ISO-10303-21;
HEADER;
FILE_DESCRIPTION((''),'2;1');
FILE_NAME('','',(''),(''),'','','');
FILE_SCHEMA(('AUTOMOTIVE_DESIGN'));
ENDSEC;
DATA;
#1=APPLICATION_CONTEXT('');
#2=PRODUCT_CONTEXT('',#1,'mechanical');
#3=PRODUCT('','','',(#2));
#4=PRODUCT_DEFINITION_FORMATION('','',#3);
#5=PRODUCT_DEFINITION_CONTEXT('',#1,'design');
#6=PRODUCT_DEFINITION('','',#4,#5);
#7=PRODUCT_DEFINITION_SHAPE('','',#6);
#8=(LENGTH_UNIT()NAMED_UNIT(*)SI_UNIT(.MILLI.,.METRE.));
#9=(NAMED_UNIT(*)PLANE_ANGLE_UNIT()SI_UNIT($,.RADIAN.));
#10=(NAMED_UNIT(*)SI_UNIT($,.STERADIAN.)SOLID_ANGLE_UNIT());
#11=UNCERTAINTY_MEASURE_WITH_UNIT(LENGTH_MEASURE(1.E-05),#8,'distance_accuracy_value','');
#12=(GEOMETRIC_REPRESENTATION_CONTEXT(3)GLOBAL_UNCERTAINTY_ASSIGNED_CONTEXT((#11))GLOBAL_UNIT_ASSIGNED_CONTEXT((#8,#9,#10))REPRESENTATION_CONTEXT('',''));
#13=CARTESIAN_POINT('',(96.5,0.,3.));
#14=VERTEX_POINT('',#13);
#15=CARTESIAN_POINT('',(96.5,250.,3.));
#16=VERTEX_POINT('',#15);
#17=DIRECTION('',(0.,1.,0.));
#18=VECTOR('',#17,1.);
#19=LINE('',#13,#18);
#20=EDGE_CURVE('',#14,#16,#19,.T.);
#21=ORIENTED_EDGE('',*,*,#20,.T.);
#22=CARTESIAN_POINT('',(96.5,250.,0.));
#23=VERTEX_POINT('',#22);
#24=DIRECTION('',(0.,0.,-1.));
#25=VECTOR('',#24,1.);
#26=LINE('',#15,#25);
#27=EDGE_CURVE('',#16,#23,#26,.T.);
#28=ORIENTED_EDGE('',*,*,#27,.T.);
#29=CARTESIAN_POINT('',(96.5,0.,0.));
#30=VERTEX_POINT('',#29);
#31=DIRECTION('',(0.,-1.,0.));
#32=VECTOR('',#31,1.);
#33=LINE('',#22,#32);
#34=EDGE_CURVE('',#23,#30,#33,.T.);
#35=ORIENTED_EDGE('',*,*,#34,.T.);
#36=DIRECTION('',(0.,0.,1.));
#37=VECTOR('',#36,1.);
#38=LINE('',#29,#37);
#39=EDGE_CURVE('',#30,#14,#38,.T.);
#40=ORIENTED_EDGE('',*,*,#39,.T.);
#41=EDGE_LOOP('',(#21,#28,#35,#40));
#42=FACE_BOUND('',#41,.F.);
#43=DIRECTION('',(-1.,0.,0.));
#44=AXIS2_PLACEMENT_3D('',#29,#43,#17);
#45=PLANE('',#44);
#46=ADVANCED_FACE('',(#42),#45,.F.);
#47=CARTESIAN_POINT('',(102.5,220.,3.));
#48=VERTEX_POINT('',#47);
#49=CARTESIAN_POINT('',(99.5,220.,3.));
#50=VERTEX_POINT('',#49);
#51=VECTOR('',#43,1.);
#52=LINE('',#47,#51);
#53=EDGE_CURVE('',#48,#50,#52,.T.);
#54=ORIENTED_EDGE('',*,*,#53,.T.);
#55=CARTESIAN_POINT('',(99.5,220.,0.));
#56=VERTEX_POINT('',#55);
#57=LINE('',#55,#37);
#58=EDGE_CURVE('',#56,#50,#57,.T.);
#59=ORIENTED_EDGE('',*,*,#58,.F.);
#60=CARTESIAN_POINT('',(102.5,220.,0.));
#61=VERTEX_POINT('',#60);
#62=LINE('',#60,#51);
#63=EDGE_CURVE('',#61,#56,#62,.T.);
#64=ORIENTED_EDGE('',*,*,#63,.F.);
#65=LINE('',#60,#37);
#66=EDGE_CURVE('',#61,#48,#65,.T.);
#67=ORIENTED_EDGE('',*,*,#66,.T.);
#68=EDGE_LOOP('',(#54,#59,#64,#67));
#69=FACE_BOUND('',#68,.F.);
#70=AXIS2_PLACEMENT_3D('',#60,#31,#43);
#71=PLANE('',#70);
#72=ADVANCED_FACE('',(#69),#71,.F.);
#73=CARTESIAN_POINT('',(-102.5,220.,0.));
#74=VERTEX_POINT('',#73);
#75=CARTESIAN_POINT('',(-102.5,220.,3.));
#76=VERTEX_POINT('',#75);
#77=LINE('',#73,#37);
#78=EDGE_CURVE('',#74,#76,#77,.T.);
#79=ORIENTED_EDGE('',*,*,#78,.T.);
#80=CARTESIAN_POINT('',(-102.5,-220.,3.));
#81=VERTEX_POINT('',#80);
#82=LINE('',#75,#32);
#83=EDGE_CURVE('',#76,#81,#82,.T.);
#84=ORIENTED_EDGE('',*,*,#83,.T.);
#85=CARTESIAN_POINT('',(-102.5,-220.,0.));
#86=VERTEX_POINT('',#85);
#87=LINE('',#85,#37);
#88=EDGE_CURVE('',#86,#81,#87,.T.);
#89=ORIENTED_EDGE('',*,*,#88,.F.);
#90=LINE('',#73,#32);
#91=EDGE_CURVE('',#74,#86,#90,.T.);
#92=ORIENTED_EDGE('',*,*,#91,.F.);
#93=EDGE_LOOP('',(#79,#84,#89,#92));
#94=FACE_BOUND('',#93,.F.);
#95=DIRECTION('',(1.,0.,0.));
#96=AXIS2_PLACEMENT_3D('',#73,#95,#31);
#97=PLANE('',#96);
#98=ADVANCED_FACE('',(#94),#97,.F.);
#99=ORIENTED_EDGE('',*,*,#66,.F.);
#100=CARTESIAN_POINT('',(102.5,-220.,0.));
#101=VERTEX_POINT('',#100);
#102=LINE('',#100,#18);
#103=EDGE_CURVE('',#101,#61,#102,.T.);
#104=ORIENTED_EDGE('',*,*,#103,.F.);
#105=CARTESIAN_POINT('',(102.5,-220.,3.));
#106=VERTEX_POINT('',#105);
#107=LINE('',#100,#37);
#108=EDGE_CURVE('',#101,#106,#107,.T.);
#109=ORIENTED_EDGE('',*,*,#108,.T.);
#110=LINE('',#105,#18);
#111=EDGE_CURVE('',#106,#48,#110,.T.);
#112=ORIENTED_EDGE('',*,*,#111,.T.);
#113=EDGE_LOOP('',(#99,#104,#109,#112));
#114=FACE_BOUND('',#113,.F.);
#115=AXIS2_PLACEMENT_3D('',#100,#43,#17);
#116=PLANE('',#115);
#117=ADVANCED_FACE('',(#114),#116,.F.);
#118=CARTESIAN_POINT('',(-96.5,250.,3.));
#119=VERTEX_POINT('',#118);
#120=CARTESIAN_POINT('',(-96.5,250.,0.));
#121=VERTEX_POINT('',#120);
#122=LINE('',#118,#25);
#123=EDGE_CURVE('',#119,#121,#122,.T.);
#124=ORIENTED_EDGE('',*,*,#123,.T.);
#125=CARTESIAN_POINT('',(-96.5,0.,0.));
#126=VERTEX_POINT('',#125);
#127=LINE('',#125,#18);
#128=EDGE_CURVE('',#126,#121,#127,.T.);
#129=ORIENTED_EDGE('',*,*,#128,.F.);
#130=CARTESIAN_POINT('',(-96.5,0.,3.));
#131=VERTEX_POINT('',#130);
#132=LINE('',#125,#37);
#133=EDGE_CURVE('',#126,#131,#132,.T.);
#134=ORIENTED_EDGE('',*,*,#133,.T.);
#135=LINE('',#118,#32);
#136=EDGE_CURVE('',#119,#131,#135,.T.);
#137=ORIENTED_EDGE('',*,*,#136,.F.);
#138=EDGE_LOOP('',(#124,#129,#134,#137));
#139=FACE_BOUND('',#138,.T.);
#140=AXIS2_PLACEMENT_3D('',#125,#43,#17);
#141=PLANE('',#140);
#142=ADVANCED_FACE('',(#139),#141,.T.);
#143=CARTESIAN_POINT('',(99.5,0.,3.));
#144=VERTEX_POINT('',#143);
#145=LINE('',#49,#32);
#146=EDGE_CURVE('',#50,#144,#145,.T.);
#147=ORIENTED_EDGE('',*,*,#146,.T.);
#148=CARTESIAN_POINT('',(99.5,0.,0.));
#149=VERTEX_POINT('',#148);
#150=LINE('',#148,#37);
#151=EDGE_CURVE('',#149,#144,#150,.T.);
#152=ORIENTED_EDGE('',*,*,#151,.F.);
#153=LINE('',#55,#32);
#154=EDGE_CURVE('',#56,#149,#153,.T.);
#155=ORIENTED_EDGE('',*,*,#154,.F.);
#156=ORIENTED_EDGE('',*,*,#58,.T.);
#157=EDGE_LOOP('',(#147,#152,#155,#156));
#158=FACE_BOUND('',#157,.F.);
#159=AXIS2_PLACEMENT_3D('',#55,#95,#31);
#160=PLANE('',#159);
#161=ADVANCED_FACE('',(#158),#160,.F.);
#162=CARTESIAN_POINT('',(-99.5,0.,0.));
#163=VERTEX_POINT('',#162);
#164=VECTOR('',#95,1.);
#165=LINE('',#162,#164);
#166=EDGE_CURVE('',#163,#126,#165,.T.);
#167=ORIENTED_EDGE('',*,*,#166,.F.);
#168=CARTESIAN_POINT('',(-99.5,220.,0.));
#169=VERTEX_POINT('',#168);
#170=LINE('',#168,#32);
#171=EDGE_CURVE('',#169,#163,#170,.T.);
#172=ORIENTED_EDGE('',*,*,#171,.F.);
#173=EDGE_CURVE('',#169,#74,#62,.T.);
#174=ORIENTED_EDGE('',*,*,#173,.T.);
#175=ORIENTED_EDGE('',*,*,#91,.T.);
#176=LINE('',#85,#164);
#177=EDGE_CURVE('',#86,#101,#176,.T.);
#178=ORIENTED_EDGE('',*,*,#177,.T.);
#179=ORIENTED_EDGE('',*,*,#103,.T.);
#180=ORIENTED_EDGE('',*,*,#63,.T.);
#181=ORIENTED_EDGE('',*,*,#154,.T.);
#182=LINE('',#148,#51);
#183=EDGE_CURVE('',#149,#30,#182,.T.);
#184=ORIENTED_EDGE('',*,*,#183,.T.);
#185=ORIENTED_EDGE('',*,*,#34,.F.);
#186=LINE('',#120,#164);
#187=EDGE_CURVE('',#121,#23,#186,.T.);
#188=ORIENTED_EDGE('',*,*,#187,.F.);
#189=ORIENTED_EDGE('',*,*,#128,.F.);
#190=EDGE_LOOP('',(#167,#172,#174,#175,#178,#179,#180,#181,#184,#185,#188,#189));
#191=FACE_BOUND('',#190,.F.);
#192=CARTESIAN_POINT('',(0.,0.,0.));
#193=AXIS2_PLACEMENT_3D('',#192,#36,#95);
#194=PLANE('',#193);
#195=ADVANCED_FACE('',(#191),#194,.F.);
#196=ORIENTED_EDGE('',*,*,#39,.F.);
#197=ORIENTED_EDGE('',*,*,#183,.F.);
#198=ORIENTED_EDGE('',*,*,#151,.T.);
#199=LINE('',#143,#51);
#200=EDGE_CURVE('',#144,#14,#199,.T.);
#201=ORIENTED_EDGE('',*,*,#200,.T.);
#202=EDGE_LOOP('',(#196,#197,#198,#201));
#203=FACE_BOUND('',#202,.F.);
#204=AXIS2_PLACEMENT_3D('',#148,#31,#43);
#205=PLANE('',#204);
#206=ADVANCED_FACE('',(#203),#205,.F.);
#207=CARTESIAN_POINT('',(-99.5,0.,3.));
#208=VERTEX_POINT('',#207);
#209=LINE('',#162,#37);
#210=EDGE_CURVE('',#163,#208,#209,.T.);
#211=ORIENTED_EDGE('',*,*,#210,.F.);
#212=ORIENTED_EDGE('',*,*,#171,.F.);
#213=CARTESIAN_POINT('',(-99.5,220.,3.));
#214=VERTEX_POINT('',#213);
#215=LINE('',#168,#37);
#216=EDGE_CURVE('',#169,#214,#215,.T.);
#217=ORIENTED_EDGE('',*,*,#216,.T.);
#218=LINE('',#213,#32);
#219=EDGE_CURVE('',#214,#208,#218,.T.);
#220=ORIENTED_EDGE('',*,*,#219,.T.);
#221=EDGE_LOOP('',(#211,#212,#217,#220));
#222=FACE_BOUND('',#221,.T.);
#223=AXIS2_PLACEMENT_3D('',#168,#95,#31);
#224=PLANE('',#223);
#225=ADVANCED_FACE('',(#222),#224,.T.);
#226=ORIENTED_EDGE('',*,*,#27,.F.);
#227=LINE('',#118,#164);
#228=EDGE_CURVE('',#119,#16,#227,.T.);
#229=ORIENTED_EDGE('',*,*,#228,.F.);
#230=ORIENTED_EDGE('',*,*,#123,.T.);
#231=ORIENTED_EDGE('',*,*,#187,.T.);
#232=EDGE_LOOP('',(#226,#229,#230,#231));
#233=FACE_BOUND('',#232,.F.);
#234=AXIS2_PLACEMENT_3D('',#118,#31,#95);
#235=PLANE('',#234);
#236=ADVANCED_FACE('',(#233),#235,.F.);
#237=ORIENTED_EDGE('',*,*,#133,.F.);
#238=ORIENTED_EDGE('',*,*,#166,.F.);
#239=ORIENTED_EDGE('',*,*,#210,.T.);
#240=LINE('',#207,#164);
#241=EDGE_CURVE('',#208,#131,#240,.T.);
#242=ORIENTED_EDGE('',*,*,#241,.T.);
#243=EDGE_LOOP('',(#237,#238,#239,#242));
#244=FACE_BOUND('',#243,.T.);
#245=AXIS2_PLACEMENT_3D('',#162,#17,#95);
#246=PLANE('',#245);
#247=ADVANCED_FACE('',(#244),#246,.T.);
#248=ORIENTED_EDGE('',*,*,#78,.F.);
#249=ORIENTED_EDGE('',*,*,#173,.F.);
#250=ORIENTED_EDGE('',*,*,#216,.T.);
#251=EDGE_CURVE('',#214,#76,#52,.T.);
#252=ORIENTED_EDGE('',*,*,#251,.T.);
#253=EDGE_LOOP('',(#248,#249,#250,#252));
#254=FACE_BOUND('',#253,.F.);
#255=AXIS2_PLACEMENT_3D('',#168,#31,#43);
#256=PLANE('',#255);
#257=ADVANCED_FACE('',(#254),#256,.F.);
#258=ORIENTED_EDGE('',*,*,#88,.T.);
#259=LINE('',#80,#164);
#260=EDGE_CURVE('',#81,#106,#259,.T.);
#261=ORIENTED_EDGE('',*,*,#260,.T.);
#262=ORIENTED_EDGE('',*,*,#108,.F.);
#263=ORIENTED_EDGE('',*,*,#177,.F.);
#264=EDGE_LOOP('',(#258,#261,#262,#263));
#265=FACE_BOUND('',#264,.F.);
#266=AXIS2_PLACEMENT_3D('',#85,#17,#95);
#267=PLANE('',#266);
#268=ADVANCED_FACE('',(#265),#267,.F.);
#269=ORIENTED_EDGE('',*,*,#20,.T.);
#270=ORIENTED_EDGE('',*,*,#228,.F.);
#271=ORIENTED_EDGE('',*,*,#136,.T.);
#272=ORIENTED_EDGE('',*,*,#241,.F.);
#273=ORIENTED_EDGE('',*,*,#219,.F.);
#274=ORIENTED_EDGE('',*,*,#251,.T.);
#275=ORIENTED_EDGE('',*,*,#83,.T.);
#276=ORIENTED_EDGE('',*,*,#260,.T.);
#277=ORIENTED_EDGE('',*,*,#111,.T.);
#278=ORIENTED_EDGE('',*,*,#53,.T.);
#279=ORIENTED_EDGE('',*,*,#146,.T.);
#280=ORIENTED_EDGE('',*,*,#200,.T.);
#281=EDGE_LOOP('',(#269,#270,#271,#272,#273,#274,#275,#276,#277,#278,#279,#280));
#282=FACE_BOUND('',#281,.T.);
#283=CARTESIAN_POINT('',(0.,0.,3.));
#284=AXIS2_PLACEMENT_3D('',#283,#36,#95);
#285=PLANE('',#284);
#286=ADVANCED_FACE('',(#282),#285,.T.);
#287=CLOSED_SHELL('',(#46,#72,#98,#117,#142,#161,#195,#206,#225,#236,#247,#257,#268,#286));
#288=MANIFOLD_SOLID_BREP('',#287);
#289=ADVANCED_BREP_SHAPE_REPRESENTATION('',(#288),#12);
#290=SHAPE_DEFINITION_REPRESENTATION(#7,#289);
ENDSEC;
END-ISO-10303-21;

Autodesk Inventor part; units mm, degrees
ref_plane "YZ Plane" through (0, 0, 0) normal (1, 0, 0) x (0, 1, 0)
ref_plane "XZ Plane" through (0, 0, 0) normal (0, 1, 0) x (-1, 0, 0)
ref_plane "XY Plane" through (0, 0, 0) normal (0, 0, 1) x (1, 0, 0)
sketch "Sketch1" plane through (0, 0, 0) normal (0, 0, 1) x (1, 0, 0)
  line L0 (-102.5, -220) -> (102.5, -220)
  line L1 (102.5, -220) -> (102.5, 220)
  line L2 (102.5, 220) -> (-102.5, 220)
  line L3 (-102.5, 220) -> (-102.5, -220)
  line L4 (-102.5, -220) -> (102.5, 220) construction
  line L5 (102.5, -220) -> (-102.5, 220) construction
  line L6 (-96.5, 220) -> (-99.5, 220)
  line L7 (-99.5, 220) -> (-99.5, 0)
  line L8 (-99.5, 0) -> (-96.5, 0)
  line L9 (-96.5, 0) -> (-96.5, 220)
  line L10 (0, 220) -> (0, 0)
  line L11 (99.5, 220) -> (99.5, 0)
  line L12 (99.5, 0) -> (96.5, 0)
  line L13 (96.5, 0) -> (96.5, 220)
  dimension "d0" = 205
  dimension "d1" = 440
  dimension "d2" = 3
  dimension "d3" = 3
  dimension "d4" = 220
sketch "Sketch2" plane through (0, 0, 3) normal (0, 0, 1) x (1, 0, 0)
  line L0 (-96.5, 250) -> (96.5, 250)
  line L1 (96.5, 250) -> (96.5, 220)
  line L2 (96.5, 220) -> (-96.5, 220)
  line L3 (-96.5, 220) -> (-96.5, 250)
  line L4 (-96.5, 250) -> (96.5, 220) construction
  line L5 (96.5, 250) -> (-96.5, 220) construction
  line L6 (-96.5, 220) -> (96.5, 220)
  point P0 (0, 0)
  point P1 (0, 235)
  point P2 (0, 220)
  dimension "d6" = 30
extrude "Plate1" add sketch "Sketch1" along normal blind 3 contours L3 L2 L7 L8 L9 L13 L12 L11 L1 L0
sheet face with bend "Face2" sketch "Sketch2" thickness 3 toward (0, 0, -1) bend radius 3
bend "Bend1"
equation "\"d5\" = Thickness"
equation "\"d7\" = BendRadius"
equation "\"d8\" = BendReliefWidth"
equation "\"d10\" = MinimumRemnant"
equation "\"d9\" = BendReliefDepth"
equation "\"d11\" = TransitionRadius"
equation "\"BendRadius\" = Thickness"
equation "\"BendReliefWidth\" = Thickness"
equation "\"BendReliefDepth\" = 0.5 * Thickness"
equation "\"CornerReliefSize\" = 4 * Thickness"
equation "\"MinimumRemnant\" = 2 * Thickness"
equation "\"TransitionRadius\" = BendRadius"
equation "\"JacobiRadiusSize\" = BendRadius"
equation "\"GapSize\" = Thickness"
equation "\"Thickness\" = 3"
properties part number "Finishing Sheets .4 ( Front )  Acrylic" material "PMMA Plastic"
